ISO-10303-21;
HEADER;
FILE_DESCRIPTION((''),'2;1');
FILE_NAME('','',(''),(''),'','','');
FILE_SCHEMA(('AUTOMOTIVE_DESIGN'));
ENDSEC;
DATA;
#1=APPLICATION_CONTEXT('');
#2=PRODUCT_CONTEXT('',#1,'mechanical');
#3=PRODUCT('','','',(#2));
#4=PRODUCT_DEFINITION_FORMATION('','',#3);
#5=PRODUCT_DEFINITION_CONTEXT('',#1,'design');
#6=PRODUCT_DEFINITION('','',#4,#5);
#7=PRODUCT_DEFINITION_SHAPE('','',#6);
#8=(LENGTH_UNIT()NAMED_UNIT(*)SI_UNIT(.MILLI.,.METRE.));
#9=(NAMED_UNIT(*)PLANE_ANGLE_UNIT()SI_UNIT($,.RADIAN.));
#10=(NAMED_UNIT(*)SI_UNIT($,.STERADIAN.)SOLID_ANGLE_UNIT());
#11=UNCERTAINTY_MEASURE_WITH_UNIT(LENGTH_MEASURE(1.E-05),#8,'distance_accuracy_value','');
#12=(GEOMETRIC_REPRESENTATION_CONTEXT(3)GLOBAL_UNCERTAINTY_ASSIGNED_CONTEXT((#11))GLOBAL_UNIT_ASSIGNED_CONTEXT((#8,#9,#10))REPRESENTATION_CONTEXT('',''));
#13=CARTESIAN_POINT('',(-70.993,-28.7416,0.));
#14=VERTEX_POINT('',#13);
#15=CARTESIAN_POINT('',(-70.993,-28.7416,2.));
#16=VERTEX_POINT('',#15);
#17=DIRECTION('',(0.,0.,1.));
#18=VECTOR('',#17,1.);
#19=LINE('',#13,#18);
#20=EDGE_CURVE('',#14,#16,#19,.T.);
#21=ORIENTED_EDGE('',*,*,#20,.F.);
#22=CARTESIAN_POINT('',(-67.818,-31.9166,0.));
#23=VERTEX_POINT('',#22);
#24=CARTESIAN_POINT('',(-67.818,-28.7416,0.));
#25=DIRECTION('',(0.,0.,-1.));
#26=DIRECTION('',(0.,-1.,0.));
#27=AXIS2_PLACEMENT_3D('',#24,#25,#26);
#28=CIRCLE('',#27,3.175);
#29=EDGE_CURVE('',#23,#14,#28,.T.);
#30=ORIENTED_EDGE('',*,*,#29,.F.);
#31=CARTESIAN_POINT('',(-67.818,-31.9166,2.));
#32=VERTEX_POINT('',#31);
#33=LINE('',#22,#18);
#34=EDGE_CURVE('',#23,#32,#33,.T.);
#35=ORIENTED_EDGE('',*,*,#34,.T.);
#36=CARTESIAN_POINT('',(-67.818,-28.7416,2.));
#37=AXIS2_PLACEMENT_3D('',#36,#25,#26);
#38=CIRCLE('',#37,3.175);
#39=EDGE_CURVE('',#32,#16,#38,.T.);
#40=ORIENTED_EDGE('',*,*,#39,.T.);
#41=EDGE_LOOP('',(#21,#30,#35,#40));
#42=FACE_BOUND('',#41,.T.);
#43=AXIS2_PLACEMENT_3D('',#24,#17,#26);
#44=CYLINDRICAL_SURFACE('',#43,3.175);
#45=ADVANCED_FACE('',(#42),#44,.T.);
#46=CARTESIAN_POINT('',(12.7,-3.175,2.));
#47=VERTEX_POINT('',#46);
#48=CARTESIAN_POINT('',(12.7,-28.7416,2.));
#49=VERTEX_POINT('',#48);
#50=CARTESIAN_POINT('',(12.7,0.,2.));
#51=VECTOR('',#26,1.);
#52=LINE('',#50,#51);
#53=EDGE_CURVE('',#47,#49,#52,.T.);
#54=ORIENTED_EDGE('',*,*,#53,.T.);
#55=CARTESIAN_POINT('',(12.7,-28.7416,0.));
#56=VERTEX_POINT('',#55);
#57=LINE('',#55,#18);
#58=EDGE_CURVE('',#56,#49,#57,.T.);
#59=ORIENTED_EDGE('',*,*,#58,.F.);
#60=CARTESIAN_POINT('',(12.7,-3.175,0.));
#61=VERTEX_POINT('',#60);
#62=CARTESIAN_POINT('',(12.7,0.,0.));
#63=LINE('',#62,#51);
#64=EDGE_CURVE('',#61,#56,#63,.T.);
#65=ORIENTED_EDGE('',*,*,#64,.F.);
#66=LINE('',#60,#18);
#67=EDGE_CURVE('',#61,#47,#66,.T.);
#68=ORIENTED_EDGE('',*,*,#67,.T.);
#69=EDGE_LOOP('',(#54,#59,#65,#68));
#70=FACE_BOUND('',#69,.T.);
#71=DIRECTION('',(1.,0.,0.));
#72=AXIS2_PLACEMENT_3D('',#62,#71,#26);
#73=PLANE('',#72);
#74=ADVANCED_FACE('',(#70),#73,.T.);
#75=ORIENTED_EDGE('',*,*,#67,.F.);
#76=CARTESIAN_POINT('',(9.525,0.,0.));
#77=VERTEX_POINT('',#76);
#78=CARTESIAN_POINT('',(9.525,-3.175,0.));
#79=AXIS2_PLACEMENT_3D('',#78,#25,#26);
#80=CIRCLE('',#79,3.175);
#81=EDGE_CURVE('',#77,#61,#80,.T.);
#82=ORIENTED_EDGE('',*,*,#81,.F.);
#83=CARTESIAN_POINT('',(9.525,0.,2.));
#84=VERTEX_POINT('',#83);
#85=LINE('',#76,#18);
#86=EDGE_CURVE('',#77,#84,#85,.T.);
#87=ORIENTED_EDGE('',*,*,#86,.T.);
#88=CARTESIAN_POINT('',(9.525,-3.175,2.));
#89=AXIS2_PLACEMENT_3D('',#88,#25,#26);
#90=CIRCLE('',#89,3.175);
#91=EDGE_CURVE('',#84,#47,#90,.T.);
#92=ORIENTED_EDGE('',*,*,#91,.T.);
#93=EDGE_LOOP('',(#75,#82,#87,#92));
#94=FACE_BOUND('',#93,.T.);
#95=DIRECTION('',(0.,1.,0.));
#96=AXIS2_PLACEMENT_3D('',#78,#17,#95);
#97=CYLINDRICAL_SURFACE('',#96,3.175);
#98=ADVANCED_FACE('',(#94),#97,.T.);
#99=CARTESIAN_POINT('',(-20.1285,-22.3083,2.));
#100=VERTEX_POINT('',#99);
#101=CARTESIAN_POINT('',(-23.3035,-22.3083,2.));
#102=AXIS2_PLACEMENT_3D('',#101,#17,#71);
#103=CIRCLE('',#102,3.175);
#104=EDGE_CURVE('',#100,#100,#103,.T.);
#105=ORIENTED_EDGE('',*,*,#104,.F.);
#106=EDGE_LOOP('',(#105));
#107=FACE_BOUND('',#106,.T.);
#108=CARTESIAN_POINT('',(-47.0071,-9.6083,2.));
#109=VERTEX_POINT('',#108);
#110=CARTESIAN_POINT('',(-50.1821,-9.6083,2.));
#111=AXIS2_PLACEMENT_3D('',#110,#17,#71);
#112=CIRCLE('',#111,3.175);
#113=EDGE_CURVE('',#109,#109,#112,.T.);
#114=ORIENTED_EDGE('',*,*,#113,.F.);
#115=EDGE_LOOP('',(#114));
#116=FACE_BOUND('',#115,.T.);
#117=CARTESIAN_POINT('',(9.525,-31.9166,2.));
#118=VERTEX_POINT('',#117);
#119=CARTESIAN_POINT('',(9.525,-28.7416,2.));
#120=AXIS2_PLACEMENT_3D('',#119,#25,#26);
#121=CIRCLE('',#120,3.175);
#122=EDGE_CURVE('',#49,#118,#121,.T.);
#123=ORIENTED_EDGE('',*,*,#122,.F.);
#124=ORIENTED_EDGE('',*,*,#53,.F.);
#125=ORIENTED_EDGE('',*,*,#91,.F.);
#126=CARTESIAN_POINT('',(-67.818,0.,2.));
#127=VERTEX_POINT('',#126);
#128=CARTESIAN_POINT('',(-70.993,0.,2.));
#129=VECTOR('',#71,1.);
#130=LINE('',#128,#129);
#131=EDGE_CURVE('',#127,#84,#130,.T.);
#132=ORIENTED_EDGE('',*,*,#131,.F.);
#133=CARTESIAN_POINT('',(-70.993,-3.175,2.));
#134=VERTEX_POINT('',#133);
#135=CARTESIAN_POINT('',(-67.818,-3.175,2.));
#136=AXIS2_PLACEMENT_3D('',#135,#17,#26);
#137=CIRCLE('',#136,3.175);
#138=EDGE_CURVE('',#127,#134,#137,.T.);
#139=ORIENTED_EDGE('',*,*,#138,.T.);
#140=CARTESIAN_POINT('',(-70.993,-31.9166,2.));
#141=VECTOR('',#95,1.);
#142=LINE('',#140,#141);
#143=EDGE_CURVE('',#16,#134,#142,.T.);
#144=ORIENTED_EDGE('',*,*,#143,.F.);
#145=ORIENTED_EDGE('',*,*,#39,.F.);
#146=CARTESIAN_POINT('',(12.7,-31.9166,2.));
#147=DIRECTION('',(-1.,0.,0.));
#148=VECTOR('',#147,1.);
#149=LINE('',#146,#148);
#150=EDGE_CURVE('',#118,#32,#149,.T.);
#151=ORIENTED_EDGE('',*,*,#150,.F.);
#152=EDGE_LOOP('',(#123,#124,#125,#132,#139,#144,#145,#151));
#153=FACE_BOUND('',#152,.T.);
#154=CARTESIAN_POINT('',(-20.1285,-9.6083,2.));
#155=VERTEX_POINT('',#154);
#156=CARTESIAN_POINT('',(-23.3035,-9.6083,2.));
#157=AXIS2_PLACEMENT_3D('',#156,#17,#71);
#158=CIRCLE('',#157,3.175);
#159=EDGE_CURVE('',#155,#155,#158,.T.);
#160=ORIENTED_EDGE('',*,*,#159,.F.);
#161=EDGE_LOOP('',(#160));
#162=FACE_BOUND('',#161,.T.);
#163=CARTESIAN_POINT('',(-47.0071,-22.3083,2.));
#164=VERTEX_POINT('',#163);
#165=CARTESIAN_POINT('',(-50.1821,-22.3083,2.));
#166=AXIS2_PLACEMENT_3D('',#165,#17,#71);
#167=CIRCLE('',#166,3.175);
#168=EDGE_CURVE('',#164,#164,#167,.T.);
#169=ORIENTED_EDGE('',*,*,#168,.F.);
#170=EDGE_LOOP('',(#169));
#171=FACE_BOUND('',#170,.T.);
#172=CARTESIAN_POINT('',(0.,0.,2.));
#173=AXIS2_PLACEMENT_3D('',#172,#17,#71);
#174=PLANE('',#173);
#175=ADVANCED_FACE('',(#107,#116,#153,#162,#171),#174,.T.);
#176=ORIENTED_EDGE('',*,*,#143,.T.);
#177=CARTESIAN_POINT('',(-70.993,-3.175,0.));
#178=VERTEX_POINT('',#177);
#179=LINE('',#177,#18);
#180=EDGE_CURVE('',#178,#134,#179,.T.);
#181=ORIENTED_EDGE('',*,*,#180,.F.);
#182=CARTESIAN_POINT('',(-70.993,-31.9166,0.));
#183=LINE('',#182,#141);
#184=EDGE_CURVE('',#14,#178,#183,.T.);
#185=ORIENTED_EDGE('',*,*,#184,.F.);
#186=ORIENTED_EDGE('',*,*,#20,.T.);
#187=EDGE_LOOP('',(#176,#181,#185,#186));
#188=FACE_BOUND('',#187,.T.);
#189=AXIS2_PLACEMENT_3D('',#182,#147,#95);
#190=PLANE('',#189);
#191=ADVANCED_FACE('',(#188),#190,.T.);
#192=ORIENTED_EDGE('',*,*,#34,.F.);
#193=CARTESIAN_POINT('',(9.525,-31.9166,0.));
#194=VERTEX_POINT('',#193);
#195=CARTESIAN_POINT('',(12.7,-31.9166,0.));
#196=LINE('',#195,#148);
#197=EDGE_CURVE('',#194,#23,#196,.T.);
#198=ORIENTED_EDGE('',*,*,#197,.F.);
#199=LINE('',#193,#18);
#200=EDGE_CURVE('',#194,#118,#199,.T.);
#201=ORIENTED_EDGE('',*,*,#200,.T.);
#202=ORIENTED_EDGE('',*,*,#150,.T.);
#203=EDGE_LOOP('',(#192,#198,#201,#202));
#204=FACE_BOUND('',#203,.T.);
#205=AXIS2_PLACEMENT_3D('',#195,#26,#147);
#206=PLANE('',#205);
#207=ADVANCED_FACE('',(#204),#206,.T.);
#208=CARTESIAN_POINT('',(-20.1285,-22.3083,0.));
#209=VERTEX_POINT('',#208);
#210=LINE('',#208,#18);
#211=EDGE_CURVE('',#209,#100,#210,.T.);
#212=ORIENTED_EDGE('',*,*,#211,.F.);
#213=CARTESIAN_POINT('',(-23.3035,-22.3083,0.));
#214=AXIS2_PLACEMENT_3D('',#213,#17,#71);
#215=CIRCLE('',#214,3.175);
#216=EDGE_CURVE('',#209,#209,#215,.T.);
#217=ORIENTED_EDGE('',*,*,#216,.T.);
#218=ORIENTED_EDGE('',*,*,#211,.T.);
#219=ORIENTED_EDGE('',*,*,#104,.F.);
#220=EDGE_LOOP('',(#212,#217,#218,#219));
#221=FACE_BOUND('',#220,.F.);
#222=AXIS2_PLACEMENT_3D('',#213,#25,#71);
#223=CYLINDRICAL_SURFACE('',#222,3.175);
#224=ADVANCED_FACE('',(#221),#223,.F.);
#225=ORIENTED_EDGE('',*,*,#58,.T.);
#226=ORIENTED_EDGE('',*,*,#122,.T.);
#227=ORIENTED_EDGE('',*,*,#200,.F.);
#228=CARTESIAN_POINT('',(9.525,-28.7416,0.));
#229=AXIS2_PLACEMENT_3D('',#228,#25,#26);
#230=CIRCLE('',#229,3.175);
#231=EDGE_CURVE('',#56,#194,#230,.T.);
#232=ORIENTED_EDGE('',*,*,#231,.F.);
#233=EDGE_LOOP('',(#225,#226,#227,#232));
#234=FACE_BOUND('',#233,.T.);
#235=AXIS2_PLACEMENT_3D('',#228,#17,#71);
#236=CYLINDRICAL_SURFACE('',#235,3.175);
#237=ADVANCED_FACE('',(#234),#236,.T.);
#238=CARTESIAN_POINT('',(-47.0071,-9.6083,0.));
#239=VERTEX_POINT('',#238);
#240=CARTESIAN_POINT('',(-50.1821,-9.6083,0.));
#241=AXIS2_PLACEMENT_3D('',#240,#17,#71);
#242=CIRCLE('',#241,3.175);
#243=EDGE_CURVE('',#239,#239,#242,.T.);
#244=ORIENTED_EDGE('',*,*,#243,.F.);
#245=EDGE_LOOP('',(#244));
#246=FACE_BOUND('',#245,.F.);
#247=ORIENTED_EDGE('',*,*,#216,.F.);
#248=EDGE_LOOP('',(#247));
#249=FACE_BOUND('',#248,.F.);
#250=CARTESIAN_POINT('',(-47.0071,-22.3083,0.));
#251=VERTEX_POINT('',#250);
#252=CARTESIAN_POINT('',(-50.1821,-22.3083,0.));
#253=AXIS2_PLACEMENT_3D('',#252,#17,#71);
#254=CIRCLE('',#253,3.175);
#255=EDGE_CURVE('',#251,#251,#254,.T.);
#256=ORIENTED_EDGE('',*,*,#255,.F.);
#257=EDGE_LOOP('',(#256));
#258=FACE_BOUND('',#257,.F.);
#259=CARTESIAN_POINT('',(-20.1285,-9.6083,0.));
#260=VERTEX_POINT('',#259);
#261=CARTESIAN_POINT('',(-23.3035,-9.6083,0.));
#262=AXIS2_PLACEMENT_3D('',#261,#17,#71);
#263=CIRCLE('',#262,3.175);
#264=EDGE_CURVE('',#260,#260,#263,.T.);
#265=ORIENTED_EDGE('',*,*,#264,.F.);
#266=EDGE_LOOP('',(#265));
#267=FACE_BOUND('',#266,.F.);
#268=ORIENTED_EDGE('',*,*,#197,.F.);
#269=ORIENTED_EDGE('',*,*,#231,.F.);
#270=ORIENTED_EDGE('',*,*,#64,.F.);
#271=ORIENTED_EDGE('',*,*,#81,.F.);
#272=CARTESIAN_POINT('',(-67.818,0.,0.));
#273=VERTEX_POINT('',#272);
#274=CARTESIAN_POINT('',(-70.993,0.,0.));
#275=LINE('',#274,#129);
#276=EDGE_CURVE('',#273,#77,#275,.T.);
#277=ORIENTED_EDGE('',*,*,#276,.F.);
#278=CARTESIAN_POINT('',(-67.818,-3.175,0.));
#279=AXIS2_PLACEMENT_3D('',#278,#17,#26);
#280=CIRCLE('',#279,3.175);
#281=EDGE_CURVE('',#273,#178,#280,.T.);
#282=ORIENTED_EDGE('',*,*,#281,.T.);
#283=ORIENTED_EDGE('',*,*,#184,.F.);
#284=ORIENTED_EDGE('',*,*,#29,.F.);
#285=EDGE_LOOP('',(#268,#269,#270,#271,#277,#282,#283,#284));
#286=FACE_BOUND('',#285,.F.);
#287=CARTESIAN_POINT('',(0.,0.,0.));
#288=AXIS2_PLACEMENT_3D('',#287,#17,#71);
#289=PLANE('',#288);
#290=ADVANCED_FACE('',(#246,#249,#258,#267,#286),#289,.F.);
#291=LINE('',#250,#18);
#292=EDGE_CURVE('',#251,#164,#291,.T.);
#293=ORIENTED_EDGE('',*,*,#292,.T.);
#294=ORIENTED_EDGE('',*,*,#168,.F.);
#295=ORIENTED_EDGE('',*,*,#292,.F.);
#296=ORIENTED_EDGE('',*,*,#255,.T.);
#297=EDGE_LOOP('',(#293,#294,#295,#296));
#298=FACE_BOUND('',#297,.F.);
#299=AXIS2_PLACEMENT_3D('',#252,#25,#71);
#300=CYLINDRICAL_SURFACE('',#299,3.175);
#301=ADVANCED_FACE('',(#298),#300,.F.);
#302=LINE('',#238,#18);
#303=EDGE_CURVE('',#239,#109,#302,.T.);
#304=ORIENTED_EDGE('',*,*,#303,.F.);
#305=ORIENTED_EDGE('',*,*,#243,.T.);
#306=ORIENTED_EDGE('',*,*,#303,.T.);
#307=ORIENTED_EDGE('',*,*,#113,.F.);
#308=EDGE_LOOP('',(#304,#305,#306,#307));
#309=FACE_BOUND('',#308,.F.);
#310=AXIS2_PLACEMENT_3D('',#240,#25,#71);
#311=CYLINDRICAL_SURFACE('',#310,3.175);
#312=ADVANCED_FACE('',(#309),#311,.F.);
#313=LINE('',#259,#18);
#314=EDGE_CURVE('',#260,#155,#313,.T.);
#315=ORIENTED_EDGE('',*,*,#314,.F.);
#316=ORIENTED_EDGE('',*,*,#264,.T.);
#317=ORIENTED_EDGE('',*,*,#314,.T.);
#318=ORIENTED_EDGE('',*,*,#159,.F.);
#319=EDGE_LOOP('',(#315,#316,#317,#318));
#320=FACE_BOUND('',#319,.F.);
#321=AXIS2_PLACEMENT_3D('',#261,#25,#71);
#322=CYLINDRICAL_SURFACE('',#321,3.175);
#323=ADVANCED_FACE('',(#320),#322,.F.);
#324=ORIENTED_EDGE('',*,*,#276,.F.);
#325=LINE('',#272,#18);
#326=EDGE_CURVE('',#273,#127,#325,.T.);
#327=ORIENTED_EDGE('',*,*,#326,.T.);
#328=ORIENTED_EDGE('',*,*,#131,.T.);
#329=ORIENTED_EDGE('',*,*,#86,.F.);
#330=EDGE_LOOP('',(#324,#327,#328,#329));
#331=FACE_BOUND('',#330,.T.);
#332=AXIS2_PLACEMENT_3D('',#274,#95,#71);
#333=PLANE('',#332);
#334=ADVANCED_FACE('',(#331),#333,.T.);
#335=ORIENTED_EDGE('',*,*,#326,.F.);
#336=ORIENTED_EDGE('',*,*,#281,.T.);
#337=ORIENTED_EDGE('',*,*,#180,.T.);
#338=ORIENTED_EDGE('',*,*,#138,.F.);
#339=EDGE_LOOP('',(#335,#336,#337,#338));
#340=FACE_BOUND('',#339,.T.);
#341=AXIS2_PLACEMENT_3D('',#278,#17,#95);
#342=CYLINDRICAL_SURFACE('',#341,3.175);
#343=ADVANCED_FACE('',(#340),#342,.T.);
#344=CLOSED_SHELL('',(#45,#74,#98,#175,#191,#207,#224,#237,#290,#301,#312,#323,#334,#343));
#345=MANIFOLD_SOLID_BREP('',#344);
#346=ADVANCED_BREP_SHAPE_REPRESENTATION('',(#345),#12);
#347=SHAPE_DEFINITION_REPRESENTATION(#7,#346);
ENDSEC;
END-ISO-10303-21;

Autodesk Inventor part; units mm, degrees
ref_plane "YZ Plane" through (0, 0, 0) normal (1, 0, 0) x (0, 1, 0)
ref_plane "XZ Plane" through (0, 0, 0) normal (0, 1, 0) x (-1, 0, 0)
ref_plane "XY Plane" through (0, 0, 0) normal (0, 0, 1) x (1, 0, 0)
sketch "Base" plane through (0, 0, 0) normal (0, 0, 1) x (1, 0, 0)
  line L0 (0, 0) -> (12.7, 0) construction
  line L1 (12.7, -15.9583) -> (-70.993, -15.9583) construction
  line L2 (12.7, 0) -> (12.7, -15.9583) construction
  line L3 (12.7, -31.9166) -> (12.7, -15.9583) construction
  line L4 (0, -31.9166) -> (12.7, -31.9166) construction
  circle A0 centre (-23.3035, -22.3083) radius 3.175
  circle A1 centre (-50.1821, -22.3083) radius 3.175
  circle A2 centre (-50.1821, -22.3083) radius 3.175
  circle A3 centre (-23.3035, -9.6083) radius 3.175
  circle A4 centre (-50.1821, -9.6083) radius 3.175
  line L5 (-50.1821, -9.6083) -> (-23.3035, -9.6083) construction
  line L6 (-50.1821, -22.3083) -> (-23.3035, -22.3083) construction
  line L7 (-50.1821, -9.6083) -> (-50.1821, -22.3083) construction
  line L8 (-23.3035, -9.6083) -> (-23.3035, -22.3083) construction
  line L9 (0, 0) -> (-70.993, 0) construction
  line L10 (0, -31.9166) -> (-70.993, -31.9166) construction
  line L11 (-70.993, -31.9166) -> (-70.993, 0) construction
  line L12 (-70.993, 0) -> (12.7, 0)
  line L13 (12.7, 0) -> (12.7, -31.9166)
  line L14 (12.7, -31.9166) -> (-70.993, -31.9166)
  line L15 (-70.993, -31.9166) -> (-70.993, 0)
  dimension "d0" = 6.35
  dimension "d1" = 6.35
  dimension "d2" = 180
  dimension "d3" = 90
  dimension "d4" = 36.0035
  dimension "d5" = 62.8821
  dimension "d6" = 83.693
  dimension "d7" = 15.9583
  dimension "d8" = 6.35
  dimension "d9" = 6.35
  dimension "d10" = 12.7
  dimension "d11" = 12.7
  dimension "d12" = 15.9583
  dimension "d13" = 0
  dimension "d14" = 12.7
  dimension "d15" = 12.7
  dimension "d16" = 62.8821
  dimension "d17" = 6.35
extrude "Plate1" add sketch "Base" along normal blind 2
fillet "Corner Round1" radius 3.175 4 edges at (12.7, -31.9166, 1) (12.7, 0, 1) (-70.993, -31.9166, 1) (-70.993, 0, 1)
equation "\"d18\" = Thickness"
equation "\"BendRadius\" = Thickness"
equation "\"BendReliefWidth\" = Thickness"
equation "\"BendReliefDepth\" = 0.5 * Thickness"
equation "\"CornerReliefSize\" = 4 * Thickness"
equation "\"MinimumRemnant\" = 2 * Thickness"
equation "\"TransitionRadius\" = BendRadius"
equation "\"JacobiRadiusSize\" = BendRadius"
equation "\"GapSize\" = Thickness"
equation "\"Thickness\" = 2"
properties part number "StockMountPlate"
